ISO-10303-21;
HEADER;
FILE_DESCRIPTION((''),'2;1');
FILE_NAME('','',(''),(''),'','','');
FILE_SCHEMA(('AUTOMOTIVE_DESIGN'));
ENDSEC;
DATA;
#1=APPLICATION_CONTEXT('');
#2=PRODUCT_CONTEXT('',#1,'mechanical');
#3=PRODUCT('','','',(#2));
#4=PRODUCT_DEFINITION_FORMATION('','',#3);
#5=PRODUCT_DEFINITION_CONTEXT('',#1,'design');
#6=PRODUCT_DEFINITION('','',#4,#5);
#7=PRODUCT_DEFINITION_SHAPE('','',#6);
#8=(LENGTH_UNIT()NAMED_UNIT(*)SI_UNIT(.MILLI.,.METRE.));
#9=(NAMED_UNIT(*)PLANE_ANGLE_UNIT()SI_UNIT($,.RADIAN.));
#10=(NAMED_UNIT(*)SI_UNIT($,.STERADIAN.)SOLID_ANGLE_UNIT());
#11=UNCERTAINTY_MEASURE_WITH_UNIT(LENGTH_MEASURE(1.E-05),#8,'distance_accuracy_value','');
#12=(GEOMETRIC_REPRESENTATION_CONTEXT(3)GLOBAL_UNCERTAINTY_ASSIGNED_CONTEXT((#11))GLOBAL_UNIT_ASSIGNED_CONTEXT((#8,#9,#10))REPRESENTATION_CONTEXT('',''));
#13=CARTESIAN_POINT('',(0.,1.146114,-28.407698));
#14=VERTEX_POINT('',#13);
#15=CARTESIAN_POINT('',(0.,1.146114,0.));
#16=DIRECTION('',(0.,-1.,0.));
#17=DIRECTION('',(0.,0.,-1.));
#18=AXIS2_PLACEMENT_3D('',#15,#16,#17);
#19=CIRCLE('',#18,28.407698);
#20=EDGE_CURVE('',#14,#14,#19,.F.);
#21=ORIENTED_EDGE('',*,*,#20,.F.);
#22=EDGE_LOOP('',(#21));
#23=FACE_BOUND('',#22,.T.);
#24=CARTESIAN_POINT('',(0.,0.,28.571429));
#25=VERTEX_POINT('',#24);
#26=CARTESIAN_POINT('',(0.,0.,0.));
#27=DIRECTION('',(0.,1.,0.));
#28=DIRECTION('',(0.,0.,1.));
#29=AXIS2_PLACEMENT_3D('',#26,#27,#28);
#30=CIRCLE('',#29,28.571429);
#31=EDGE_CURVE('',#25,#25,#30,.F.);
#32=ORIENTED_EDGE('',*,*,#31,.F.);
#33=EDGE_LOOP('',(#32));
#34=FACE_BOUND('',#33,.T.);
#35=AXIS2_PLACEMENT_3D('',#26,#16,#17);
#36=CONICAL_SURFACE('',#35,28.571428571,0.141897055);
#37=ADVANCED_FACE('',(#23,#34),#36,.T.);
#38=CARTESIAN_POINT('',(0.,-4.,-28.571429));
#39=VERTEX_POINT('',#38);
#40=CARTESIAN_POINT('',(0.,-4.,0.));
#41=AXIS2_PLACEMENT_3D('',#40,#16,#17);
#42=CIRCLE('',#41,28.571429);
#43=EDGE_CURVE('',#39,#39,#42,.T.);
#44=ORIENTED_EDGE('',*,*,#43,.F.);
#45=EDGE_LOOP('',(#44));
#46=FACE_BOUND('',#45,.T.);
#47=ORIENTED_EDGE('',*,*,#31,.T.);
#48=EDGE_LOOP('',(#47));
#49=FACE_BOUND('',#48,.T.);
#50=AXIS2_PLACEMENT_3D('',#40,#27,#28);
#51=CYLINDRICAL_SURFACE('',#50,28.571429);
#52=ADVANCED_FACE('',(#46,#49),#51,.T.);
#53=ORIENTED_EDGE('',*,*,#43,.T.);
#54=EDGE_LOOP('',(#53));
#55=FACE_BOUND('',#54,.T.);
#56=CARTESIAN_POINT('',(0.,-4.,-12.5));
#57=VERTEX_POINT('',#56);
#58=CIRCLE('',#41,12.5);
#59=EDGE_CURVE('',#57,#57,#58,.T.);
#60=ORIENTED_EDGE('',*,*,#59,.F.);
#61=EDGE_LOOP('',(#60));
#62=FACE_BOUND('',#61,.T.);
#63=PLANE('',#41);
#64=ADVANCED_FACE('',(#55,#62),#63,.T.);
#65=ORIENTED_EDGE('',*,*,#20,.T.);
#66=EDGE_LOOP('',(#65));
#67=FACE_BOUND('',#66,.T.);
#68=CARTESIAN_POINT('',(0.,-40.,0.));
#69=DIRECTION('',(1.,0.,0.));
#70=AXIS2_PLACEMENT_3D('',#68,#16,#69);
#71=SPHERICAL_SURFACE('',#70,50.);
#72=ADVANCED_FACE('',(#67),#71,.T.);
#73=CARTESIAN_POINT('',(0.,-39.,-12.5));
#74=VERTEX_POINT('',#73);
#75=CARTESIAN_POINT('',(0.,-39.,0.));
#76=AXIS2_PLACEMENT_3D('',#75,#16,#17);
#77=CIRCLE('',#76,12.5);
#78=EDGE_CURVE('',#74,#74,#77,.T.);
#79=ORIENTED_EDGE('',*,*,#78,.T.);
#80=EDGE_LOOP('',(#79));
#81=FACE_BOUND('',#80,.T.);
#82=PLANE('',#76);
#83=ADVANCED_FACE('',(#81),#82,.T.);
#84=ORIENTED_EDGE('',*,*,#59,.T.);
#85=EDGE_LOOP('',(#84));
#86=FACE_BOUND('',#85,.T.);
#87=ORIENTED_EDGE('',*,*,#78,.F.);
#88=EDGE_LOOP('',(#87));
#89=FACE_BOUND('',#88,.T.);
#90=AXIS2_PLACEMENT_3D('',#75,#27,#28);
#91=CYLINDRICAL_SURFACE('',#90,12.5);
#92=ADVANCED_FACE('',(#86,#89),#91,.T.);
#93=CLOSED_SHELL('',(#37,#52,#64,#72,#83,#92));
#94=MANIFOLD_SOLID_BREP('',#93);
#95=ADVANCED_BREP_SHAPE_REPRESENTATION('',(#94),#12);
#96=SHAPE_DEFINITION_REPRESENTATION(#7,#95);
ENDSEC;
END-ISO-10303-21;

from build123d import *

# Parameters (mm, degrees)
CHAMFER1_SIZE       = 1.428571429
SKETCH7_R           = 28.571428571
BOSS_EXTRUDE2_DEPTH = 4
SKETCH8_R           = 12.5
BOSS_EXTRUDE3_DEPTH = 35


with BuildPart() as part:
    # Sketch1 → Revolve1 (revolve)
    with BuildSketch(Plane.XY, mode=Mode.PRIVATE) as revolve1_sk:
        with BuildLine():
            Line((0, 0), (-30, 0))
            ThreePointArc((-30, 0), (-15.811388301, 7.434164903), (0, 10))
            Line((0, 10), (0, 0))
        make_face()
    revolve(revolve1_sk.sketch.rotate(Axis((0, 0, 0), (0, 1, 0)), 180), axis=Axis((0, 0, 0), (0, 1, 0)))

    # Chamfer1
    # the kernel refuses this chamfer: 2, 1.428571429 mm, written as the material it takes off along each edge
    with BuildSketch(Plane(origin=(0, 0, 0), x_dir=(1, 0, 0), z_dir=(0, 0, 1))) as chamfer1_piece_1:
        with BuildLine():
            Line((30 - CHAMFER1_SIZE, 0), (28.407698006, 1.14611396))
            ThreePointArc((28.407698006, 1.14611396), (29.186973853, 0.597051091), (30, 0))
            Line((30, 0), (30 - CHAMFER1_SIZE, 0))
        make_face()
    revolve(axis=Axis((0, 0, 0), (0, 1, 0)), mode=Mode.SUBTRACT)

    # Sketch7 → Boss-Extrude2 (add)
    with BuildSketch(Plane.XZ):
        with Locations(Location((0, 0, 0), (0, 0, 270))):
            Circle(SKETCH7_R)
    extrude(amount=BOSS_EXTRUDE2_DEPTH)

    # Sketch8 → Boss-Extrude3 (add)
    with BuildSketch(Plane.XZ.offset(4)):
        with Locations(Location((0, 0, 0), (0, 0, 270))):
            Circle(SKETCH8_R)
    extrude(amount=BOSS_EXTRUDE3_DEPTH)


solid = part.part
